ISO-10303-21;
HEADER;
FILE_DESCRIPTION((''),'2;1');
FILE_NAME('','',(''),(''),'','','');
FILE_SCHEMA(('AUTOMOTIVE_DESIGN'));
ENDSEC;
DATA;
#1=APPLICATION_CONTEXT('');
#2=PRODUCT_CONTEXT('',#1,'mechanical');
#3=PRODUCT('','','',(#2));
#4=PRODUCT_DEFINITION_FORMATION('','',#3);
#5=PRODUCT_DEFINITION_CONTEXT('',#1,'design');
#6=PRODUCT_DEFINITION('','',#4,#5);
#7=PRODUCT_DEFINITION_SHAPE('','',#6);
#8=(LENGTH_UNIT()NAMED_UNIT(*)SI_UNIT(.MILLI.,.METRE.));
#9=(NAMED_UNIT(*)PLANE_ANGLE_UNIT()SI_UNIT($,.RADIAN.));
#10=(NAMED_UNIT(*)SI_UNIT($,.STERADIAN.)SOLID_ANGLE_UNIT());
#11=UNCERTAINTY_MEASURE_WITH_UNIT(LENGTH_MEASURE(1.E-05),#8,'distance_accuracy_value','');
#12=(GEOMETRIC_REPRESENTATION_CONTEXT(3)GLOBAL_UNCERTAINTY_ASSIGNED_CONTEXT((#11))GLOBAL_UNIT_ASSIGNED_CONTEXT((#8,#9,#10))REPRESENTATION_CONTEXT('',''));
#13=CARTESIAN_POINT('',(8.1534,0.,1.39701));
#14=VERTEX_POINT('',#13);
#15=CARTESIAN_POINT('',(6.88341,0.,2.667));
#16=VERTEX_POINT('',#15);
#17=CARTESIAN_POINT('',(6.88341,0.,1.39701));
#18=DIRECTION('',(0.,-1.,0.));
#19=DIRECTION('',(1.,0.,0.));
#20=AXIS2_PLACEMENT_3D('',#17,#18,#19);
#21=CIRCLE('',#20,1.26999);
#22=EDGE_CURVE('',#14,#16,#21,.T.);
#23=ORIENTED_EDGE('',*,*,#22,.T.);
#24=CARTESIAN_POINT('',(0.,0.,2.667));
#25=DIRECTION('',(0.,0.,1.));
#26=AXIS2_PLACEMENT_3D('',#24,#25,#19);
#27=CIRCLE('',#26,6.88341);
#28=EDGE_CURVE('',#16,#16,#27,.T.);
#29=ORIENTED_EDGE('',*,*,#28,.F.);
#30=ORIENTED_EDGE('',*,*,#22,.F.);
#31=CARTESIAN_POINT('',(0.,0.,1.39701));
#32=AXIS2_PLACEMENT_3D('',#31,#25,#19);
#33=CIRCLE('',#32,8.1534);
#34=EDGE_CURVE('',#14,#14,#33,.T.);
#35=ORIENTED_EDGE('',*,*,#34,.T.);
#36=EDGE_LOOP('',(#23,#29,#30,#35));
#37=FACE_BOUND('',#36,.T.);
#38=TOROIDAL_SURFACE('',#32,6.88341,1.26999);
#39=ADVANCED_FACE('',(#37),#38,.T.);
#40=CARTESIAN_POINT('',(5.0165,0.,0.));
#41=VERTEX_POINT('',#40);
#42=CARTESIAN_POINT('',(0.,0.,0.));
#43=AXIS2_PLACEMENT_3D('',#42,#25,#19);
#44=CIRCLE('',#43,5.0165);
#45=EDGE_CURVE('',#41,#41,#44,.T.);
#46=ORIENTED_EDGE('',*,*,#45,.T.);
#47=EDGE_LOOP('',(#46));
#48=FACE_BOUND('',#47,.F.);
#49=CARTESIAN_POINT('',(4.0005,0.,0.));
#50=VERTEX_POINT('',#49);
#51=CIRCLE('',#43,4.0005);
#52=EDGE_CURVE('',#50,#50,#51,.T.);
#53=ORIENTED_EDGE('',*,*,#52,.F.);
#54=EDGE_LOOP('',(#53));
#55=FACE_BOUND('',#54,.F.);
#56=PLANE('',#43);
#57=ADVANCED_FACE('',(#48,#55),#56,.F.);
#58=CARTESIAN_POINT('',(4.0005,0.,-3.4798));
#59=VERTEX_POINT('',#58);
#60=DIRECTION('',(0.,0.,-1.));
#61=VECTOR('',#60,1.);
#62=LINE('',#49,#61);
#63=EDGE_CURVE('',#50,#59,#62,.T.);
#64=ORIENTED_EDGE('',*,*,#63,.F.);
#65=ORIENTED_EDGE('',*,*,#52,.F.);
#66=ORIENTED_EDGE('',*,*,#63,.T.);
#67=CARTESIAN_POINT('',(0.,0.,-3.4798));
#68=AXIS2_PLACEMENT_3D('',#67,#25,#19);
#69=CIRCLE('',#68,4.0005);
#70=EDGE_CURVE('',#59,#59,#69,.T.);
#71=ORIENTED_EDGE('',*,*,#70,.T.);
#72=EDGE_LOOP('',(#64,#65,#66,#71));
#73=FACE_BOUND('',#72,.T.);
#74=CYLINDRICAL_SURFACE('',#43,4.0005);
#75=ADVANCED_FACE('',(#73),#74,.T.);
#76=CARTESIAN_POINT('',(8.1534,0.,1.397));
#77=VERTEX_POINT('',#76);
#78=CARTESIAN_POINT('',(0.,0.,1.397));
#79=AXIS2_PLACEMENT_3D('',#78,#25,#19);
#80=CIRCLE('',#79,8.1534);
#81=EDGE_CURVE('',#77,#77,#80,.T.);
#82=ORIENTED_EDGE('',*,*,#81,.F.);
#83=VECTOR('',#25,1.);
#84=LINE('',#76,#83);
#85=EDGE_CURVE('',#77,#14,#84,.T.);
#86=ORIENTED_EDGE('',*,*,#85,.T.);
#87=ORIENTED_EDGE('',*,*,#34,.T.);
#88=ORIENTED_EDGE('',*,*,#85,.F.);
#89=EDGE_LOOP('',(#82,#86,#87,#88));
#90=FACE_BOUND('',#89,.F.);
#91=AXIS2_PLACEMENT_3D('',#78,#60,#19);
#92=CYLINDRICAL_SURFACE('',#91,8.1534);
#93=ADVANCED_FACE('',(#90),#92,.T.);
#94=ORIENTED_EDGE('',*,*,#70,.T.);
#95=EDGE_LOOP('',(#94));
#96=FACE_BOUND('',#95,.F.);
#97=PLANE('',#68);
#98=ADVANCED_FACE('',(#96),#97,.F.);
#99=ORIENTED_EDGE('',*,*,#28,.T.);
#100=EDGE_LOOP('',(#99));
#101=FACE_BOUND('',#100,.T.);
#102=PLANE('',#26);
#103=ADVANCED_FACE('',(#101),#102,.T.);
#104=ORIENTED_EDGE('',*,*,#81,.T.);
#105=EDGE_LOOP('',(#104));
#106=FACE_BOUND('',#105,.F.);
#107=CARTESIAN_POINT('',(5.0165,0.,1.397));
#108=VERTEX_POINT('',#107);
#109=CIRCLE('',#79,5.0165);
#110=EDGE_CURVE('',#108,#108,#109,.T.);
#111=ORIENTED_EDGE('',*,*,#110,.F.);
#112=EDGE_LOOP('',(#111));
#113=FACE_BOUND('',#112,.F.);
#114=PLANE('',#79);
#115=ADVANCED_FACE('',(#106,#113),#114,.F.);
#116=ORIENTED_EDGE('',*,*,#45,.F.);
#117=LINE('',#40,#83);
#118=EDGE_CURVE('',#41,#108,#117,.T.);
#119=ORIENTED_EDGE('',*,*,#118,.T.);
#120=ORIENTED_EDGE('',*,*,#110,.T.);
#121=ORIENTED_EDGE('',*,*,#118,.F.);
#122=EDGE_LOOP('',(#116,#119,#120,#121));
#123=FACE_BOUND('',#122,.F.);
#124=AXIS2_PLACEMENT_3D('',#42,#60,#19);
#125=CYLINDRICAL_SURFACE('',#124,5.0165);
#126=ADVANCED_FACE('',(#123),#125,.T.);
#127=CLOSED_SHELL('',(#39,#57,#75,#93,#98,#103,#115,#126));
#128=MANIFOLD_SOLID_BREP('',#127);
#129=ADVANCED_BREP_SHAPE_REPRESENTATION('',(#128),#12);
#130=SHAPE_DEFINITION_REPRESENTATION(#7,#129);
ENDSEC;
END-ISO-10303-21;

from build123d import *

# Parameters (mm, degrees)
F0_R     = 4.0005
F1_DEPTH = 3.4798
F0_R_2   = 5.0165
F2_DEPTH = 1.397
F3_R     = 8.1534
F3_R_2   = 5.0165
F4_DEPTH = 1.27
F5_R     = 1.26999


# Not quite as in the source:
# - a fillet or chamfer is up to 0.001 mm smaller than in the source, because OpenCascade refuses the exact size


with BuildPart() as f1:
    # F0 (on Top) → F1 (new body)
    with BuildSketch(Plane.XY):
        Circle(F0_R)
    extrude(amount=-F1_DEPTH)

    # F0 (on Top) → F2 (join)
    with BuildSketch(Plane.XY):
        Circle(F0_R_2)
        Circle(F0_R, mode=Mode.SUBTRACT)
        Circle(F0_R)
    extrude(amount=F2_DEPTH)

    # F3 (on face) → F4 (join)
    with BuildSketch(Plane.XY.offset(1.397)):
        Circle(F3_R)
        Circle(F3_R_2, mode=Mode.SUBTRACT)
        Circle(F3_R_2)
    extrude(amount=F4_DEPTH)

    # F5 (radius 1.27 in the source; OpenCascade refuses exactly that, so slightly less here)
    f5_edges = [f1.edges().sort_by_distance(p)[0] for p in [
        (-8.1534, 0, 2.667),
    ]]
    fillet(f5_edges, radius=F5_R)


solid = f1.part
